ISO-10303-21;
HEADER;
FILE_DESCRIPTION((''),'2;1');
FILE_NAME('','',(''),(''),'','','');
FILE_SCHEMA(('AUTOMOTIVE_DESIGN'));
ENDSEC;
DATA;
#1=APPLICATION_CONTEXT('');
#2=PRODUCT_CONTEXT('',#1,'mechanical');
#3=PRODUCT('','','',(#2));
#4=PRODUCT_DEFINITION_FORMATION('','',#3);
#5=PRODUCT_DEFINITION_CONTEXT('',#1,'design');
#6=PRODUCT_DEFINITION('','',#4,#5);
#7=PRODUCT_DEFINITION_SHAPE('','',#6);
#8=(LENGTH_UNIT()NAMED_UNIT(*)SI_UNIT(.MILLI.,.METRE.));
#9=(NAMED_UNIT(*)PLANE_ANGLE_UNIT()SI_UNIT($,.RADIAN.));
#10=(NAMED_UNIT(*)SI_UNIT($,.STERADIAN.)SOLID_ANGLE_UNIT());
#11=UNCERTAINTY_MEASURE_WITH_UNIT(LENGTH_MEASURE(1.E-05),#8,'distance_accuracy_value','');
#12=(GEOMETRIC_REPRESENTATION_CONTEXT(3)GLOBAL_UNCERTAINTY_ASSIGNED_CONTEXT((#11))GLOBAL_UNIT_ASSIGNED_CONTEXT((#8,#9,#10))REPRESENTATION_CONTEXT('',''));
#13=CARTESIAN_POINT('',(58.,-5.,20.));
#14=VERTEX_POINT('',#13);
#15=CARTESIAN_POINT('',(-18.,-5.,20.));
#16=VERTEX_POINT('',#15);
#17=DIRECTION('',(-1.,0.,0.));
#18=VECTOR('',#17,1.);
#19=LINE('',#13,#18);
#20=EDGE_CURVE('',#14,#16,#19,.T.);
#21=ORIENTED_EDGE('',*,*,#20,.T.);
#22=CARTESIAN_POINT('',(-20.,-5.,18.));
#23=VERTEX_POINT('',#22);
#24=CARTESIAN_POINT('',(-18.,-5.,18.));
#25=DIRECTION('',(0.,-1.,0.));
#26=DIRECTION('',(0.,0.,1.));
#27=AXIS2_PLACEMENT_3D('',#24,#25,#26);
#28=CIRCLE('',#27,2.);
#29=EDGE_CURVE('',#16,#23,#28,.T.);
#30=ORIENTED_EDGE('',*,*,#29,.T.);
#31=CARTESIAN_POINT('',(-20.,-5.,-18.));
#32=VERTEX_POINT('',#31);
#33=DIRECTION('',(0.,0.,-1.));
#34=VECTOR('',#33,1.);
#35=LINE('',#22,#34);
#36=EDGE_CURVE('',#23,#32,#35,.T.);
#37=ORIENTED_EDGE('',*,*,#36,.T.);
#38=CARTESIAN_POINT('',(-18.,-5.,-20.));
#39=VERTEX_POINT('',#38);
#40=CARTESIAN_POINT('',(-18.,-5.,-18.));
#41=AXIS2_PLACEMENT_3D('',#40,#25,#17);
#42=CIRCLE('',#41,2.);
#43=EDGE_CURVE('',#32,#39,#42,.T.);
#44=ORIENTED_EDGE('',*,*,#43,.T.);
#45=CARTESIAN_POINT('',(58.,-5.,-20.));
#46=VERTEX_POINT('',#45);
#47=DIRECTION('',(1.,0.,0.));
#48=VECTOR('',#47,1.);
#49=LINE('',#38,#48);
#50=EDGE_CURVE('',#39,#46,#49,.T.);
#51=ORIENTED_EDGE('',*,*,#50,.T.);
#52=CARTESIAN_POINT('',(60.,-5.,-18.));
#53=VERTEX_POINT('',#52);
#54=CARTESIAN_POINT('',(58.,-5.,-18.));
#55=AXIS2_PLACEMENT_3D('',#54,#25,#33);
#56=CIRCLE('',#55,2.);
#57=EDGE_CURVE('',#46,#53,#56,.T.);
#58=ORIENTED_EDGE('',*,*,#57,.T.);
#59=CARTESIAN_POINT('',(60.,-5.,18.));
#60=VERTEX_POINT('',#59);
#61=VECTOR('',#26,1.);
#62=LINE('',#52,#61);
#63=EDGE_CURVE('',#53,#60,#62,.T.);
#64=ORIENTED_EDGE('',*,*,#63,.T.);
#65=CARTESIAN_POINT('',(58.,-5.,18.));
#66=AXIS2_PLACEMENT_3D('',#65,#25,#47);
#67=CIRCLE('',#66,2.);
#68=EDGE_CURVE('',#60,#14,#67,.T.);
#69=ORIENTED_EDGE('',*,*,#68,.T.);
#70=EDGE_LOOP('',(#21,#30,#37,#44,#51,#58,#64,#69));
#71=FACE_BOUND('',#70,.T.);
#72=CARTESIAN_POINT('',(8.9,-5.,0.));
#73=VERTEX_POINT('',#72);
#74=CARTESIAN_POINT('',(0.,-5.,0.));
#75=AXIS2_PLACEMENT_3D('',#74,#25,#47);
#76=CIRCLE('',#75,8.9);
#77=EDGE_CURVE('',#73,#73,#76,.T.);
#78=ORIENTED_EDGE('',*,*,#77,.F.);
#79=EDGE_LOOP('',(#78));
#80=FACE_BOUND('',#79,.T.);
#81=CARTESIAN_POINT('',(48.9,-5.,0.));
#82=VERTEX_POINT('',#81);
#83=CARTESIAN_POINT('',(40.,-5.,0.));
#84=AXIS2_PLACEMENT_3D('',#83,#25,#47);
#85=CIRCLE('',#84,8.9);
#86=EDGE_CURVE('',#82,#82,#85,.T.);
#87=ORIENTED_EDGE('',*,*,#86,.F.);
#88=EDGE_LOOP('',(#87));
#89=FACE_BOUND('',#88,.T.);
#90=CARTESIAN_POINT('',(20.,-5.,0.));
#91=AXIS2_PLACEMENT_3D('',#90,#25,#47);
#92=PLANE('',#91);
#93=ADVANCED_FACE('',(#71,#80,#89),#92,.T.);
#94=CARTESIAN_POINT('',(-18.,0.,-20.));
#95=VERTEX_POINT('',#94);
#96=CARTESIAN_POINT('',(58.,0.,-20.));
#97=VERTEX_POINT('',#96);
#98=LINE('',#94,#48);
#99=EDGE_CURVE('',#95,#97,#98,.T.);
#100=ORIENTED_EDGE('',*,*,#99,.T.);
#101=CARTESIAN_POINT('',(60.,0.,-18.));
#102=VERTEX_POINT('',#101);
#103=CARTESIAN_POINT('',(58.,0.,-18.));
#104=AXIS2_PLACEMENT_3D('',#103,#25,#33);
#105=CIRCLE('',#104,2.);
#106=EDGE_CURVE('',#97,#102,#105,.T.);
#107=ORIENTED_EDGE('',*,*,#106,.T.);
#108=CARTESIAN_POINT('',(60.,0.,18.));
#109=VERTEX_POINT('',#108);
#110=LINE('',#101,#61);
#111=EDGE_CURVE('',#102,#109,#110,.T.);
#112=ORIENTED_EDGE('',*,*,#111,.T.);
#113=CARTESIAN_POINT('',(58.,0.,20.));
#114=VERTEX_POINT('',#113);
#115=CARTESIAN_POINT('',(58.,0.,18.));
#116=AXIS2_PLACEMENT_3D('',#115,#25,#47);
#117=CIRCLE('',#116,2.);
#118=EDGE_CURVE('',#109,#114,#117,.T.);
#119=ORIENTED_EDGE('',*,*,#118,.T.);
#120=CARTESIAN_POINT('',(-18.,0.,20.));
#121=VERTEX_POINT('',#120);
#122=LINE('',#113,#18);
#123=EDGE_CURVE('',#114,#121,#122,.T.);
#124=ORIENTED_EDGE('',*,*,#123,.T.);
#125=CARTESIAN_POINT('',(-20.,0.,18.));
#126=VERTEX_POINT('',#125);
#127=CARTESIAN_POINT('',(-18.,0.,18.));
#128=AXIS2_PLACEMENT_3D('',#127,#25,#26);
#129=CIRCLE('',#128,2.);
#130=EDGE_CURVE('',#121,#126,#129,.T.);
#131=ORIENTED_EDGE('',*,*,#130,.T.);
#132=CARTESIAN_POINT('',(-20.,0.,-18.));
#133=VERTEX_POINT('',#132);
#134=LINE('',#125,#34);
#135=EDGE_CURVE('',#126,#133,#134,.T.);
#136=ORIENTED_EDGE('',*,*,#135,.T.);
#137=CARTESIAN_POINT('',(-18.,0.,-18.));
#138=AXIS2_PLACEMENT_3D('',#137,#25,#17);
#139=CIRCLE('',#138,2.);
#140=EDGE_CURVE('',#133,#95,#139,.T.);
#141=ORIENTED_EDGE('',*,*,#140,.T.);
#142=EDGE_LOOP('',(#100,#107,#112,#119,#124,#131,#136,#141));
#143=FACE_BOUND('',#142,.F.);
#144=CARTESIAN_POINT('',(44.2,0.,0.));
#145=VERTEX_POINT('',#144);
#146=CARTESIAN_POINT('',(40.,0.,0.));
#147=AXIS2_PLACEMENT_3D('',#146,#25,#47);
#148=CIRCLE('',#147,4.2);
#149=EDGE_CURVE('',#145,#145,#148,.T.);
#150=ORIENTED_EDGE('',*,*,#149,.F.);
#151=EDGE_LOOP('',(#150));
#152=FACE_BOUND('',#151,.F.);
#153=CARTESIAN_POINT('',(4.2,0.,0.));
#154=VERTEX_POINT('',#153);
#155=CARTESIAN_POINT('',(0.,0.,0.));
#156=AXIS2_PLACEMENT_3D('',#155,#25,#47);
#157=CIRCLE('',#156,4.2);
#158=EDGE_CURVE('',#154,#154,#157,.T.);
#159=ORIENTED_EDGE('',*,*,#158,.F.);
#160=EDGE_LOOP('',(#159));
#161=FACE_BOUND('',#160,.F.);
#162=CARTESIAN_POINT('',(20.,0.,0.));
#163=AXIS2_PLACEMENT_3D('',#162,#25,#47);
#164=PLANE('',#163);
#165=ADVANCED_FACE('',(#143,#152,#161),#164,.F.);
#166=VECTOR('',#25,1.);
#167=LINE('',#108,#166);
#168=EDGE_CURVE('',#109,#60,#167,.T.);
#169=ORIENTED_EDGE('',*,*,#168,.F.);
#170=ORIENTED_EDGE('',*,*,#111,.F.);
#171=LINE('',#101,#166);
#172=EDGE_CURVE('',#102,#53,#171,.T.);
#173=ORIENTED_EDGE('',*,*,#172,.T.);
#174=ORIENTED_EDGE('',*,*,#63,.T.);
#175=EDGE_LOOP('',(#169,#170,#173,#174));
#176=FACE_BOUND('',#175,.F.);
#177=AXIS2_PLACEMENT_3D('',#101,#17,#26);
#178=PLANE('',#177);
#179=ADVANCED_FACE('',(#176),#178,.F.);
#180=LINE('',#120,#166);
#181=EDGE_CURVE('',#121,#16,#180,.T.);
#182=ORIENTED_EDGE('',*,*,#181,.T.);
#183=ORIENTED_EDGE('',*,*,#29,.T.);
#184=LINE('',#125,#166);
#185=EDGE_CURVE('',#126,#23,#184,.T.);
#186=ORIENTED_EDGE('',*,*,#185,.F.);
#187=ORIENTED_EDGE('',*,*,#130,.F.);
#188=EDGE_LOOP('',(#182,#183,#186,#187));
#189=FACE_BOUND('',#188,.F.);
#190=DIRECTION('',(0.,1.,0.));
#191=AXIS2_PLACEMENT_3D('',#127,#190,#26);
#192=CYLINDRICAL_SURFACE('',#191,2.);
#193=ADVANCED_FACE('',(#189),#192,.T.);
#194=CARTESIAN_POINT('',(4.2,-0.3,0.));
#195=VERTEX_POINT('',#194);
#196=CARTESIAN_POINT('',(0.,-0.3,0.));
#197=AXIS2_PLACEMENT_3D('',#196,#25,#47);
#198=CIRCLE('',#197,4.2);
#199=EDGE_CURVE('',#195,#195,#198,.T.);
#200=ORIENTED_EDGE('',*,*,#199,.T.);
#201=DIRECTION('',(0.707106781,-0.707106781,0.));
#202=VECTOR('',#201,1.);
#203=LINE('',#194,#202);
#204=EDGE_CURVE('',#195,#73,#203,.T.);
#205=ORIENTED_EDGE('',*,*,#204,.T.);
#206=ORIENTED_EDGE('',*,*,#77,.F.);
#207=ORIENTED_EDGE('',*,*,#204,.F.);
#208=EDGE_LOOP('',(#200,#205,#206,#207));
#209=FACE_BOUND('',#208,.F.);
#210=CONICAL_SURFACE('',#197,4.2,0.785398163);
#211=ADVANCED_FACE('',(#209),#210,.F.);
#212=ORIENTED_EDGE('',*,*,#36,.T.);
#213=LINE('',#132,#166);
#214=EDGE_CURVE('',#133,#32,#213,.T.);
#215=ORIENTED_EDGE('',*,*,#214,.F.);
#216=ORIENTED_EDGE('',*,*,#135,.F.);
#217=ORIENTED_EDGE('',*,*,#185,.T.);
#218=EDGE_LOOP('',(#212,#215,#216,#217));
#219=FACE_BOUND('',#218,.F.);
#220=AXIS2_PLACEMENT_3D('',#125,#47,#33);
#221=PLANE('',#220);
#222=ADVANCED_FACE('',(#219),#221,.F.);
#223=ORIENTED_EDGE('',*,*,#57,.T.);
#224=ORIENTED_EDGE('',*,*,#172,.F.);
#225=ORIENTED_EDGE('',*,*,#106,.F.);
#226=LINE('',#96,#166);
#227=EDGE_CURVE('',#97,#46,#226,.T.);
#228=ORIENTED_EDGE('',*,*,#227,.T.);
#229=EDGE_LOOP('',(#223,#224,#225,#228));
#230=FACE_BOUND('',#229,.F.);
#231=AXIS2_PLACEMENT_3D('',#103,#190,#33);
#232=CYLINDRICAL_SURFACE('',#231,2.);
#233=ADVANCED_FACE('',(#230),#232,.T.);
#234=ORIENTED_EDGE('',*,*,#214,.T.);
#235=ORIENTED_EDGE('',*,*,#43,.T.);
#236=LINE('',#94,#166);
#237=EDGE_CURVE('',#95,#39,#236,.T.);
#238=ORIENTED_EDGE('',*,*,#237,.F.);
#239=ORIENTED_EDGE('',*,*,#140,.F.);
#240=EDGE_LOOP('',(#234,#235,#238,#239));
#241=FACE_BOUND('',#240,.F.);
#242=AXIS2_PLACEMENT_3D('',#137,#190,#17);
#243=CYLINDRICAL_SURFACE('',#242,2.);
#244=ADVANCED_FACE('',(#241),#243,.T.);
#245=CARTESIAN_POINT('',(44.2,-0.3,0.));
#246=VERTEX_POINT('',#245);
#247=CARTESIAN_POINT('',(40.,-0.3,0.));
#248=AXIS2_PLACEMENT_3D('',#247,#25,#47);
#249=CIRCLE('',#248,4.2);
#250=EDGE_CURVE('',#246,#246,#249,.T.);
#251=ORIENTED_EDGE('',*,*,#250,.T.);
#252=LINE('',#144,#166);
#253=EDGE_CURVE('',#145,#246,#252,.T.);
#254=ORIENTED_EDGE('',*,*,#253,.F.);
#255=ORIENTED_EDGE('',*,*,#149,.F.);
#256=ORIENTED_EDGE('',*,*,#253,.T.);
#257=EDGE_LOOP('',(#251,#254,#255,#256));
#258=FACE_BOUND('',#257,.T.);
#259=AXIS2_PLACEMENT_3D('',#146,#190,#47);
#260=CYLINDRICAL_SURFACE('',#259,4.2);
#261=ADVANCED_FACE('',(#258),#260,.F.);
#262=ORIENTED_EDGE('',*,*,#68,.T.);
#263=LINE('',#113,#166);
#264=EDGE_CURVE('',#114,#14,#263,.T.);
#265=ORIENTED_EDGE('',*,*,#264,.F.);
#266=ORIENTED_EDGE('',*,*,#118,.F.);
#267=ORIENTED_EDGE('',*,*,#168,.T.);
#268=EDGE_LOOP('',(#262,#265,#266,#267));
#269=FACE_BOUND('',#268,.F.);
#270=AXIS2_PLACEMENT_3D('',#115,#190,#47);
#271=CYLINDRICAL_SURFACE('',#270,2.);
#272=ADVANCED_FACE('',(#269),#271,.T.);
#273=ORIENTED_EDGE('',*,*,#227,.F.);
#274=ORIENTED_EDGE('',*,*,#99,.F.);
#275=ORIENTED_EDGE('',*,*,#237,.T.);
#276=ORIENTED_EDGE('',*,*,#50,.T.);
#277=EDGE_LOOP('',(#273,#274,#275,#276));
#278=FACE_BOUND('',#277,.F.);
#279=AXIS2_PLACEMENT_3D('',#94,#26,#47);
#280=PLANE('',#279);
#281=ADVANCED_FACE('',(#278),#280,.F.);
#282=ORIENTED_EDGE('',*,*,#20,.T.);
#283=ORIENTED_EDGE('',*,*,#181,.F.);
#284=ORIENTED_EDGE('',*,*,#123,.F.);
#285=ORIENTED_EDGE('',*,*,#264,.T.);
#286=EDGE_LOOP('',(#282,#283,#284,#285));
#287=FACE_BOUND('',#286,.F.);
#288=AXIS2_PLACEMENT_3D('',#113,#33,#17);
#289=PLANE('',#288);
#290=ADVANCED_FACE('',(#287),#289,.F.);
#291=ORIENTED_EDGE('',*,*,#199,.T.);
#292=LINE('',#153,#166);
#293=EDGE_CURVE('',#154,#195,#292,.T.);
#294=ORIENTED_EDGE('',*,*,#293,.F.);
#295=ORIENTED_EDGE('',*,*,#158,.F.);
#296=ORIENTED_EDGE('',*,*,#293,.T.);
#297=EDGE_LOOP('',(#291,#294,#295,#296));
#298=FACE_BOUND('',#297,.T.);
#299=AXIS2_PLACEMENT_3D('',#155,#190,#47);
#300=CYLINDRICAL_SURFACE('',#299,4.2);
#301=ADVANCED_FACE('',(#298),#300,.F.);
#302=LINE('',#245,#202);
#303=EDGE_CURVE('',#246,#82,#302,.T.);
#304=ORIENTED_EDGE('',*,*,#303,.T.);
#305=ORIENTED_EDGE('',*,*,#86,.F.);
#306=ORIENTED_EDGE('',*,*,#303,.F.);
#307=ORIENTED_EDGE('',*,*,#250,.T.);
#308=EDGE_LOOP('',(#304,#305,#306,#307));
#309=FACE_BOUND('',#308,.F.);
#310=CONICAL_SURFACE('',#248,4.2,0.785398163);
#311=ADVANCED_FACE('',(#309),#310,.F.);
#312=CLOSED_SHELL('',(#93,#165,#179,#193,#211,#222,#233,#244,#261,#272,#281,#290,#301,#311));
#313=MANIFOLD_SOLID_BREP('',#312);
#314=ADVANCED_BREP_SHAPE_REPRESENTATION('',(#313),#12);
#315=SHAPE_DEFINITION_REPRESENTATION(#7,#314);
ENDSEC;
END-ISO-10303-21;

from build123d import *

# Parameters (mm, degrees)
F0_R     = 4.2
F1_DEPTH = 5
F2_SIZE  = 4.7


# Not quite as in the source:
# - a feature names something its author has since deleted; it is built from what else it names


with BuildPart() as f1:
    # F0 (on Front) → F1 (new body)
    with BuildSketch(Plane.XZ):
        with BuildLine():
            Line((58, 20), (-18, 20))
            ThreePointArc((-18, 20), (-19.4142135624, 19.4142135624), (-20, 18))
            Line((-20, 18), (-20, -18))
            ThreePointArc((-20, -18), (-19.4142135624, -19.4142135624), (-18, -20))
            Line((-18, -20), (58, -20))
            ThreePointArc((58, -20), (59.4142135624, -19.4142135624), (60, -18))
            Line((60, -18), (60, 18))
            ThreePointArc((60, 18), (59.4142135624, 19.4142135624), (58, 20))
        make_face()
        Circle(F0_R, mode=Mode.SUBTRACT)
        with Locations((40, 0)):
            Circle(F0_R, mode=Mode.SUBTRACT)
    extrude(amount=F1_DEPTH)

    # F2
    f2_edges = [f1.edges().sort_by_distance(p)[0] for p in [
        (-4.2, -5, 0),
        (35.8, -5, 0),
    ]]
    chamfer(f2_edges, length=F2_SIZE)


solid = f1.part
